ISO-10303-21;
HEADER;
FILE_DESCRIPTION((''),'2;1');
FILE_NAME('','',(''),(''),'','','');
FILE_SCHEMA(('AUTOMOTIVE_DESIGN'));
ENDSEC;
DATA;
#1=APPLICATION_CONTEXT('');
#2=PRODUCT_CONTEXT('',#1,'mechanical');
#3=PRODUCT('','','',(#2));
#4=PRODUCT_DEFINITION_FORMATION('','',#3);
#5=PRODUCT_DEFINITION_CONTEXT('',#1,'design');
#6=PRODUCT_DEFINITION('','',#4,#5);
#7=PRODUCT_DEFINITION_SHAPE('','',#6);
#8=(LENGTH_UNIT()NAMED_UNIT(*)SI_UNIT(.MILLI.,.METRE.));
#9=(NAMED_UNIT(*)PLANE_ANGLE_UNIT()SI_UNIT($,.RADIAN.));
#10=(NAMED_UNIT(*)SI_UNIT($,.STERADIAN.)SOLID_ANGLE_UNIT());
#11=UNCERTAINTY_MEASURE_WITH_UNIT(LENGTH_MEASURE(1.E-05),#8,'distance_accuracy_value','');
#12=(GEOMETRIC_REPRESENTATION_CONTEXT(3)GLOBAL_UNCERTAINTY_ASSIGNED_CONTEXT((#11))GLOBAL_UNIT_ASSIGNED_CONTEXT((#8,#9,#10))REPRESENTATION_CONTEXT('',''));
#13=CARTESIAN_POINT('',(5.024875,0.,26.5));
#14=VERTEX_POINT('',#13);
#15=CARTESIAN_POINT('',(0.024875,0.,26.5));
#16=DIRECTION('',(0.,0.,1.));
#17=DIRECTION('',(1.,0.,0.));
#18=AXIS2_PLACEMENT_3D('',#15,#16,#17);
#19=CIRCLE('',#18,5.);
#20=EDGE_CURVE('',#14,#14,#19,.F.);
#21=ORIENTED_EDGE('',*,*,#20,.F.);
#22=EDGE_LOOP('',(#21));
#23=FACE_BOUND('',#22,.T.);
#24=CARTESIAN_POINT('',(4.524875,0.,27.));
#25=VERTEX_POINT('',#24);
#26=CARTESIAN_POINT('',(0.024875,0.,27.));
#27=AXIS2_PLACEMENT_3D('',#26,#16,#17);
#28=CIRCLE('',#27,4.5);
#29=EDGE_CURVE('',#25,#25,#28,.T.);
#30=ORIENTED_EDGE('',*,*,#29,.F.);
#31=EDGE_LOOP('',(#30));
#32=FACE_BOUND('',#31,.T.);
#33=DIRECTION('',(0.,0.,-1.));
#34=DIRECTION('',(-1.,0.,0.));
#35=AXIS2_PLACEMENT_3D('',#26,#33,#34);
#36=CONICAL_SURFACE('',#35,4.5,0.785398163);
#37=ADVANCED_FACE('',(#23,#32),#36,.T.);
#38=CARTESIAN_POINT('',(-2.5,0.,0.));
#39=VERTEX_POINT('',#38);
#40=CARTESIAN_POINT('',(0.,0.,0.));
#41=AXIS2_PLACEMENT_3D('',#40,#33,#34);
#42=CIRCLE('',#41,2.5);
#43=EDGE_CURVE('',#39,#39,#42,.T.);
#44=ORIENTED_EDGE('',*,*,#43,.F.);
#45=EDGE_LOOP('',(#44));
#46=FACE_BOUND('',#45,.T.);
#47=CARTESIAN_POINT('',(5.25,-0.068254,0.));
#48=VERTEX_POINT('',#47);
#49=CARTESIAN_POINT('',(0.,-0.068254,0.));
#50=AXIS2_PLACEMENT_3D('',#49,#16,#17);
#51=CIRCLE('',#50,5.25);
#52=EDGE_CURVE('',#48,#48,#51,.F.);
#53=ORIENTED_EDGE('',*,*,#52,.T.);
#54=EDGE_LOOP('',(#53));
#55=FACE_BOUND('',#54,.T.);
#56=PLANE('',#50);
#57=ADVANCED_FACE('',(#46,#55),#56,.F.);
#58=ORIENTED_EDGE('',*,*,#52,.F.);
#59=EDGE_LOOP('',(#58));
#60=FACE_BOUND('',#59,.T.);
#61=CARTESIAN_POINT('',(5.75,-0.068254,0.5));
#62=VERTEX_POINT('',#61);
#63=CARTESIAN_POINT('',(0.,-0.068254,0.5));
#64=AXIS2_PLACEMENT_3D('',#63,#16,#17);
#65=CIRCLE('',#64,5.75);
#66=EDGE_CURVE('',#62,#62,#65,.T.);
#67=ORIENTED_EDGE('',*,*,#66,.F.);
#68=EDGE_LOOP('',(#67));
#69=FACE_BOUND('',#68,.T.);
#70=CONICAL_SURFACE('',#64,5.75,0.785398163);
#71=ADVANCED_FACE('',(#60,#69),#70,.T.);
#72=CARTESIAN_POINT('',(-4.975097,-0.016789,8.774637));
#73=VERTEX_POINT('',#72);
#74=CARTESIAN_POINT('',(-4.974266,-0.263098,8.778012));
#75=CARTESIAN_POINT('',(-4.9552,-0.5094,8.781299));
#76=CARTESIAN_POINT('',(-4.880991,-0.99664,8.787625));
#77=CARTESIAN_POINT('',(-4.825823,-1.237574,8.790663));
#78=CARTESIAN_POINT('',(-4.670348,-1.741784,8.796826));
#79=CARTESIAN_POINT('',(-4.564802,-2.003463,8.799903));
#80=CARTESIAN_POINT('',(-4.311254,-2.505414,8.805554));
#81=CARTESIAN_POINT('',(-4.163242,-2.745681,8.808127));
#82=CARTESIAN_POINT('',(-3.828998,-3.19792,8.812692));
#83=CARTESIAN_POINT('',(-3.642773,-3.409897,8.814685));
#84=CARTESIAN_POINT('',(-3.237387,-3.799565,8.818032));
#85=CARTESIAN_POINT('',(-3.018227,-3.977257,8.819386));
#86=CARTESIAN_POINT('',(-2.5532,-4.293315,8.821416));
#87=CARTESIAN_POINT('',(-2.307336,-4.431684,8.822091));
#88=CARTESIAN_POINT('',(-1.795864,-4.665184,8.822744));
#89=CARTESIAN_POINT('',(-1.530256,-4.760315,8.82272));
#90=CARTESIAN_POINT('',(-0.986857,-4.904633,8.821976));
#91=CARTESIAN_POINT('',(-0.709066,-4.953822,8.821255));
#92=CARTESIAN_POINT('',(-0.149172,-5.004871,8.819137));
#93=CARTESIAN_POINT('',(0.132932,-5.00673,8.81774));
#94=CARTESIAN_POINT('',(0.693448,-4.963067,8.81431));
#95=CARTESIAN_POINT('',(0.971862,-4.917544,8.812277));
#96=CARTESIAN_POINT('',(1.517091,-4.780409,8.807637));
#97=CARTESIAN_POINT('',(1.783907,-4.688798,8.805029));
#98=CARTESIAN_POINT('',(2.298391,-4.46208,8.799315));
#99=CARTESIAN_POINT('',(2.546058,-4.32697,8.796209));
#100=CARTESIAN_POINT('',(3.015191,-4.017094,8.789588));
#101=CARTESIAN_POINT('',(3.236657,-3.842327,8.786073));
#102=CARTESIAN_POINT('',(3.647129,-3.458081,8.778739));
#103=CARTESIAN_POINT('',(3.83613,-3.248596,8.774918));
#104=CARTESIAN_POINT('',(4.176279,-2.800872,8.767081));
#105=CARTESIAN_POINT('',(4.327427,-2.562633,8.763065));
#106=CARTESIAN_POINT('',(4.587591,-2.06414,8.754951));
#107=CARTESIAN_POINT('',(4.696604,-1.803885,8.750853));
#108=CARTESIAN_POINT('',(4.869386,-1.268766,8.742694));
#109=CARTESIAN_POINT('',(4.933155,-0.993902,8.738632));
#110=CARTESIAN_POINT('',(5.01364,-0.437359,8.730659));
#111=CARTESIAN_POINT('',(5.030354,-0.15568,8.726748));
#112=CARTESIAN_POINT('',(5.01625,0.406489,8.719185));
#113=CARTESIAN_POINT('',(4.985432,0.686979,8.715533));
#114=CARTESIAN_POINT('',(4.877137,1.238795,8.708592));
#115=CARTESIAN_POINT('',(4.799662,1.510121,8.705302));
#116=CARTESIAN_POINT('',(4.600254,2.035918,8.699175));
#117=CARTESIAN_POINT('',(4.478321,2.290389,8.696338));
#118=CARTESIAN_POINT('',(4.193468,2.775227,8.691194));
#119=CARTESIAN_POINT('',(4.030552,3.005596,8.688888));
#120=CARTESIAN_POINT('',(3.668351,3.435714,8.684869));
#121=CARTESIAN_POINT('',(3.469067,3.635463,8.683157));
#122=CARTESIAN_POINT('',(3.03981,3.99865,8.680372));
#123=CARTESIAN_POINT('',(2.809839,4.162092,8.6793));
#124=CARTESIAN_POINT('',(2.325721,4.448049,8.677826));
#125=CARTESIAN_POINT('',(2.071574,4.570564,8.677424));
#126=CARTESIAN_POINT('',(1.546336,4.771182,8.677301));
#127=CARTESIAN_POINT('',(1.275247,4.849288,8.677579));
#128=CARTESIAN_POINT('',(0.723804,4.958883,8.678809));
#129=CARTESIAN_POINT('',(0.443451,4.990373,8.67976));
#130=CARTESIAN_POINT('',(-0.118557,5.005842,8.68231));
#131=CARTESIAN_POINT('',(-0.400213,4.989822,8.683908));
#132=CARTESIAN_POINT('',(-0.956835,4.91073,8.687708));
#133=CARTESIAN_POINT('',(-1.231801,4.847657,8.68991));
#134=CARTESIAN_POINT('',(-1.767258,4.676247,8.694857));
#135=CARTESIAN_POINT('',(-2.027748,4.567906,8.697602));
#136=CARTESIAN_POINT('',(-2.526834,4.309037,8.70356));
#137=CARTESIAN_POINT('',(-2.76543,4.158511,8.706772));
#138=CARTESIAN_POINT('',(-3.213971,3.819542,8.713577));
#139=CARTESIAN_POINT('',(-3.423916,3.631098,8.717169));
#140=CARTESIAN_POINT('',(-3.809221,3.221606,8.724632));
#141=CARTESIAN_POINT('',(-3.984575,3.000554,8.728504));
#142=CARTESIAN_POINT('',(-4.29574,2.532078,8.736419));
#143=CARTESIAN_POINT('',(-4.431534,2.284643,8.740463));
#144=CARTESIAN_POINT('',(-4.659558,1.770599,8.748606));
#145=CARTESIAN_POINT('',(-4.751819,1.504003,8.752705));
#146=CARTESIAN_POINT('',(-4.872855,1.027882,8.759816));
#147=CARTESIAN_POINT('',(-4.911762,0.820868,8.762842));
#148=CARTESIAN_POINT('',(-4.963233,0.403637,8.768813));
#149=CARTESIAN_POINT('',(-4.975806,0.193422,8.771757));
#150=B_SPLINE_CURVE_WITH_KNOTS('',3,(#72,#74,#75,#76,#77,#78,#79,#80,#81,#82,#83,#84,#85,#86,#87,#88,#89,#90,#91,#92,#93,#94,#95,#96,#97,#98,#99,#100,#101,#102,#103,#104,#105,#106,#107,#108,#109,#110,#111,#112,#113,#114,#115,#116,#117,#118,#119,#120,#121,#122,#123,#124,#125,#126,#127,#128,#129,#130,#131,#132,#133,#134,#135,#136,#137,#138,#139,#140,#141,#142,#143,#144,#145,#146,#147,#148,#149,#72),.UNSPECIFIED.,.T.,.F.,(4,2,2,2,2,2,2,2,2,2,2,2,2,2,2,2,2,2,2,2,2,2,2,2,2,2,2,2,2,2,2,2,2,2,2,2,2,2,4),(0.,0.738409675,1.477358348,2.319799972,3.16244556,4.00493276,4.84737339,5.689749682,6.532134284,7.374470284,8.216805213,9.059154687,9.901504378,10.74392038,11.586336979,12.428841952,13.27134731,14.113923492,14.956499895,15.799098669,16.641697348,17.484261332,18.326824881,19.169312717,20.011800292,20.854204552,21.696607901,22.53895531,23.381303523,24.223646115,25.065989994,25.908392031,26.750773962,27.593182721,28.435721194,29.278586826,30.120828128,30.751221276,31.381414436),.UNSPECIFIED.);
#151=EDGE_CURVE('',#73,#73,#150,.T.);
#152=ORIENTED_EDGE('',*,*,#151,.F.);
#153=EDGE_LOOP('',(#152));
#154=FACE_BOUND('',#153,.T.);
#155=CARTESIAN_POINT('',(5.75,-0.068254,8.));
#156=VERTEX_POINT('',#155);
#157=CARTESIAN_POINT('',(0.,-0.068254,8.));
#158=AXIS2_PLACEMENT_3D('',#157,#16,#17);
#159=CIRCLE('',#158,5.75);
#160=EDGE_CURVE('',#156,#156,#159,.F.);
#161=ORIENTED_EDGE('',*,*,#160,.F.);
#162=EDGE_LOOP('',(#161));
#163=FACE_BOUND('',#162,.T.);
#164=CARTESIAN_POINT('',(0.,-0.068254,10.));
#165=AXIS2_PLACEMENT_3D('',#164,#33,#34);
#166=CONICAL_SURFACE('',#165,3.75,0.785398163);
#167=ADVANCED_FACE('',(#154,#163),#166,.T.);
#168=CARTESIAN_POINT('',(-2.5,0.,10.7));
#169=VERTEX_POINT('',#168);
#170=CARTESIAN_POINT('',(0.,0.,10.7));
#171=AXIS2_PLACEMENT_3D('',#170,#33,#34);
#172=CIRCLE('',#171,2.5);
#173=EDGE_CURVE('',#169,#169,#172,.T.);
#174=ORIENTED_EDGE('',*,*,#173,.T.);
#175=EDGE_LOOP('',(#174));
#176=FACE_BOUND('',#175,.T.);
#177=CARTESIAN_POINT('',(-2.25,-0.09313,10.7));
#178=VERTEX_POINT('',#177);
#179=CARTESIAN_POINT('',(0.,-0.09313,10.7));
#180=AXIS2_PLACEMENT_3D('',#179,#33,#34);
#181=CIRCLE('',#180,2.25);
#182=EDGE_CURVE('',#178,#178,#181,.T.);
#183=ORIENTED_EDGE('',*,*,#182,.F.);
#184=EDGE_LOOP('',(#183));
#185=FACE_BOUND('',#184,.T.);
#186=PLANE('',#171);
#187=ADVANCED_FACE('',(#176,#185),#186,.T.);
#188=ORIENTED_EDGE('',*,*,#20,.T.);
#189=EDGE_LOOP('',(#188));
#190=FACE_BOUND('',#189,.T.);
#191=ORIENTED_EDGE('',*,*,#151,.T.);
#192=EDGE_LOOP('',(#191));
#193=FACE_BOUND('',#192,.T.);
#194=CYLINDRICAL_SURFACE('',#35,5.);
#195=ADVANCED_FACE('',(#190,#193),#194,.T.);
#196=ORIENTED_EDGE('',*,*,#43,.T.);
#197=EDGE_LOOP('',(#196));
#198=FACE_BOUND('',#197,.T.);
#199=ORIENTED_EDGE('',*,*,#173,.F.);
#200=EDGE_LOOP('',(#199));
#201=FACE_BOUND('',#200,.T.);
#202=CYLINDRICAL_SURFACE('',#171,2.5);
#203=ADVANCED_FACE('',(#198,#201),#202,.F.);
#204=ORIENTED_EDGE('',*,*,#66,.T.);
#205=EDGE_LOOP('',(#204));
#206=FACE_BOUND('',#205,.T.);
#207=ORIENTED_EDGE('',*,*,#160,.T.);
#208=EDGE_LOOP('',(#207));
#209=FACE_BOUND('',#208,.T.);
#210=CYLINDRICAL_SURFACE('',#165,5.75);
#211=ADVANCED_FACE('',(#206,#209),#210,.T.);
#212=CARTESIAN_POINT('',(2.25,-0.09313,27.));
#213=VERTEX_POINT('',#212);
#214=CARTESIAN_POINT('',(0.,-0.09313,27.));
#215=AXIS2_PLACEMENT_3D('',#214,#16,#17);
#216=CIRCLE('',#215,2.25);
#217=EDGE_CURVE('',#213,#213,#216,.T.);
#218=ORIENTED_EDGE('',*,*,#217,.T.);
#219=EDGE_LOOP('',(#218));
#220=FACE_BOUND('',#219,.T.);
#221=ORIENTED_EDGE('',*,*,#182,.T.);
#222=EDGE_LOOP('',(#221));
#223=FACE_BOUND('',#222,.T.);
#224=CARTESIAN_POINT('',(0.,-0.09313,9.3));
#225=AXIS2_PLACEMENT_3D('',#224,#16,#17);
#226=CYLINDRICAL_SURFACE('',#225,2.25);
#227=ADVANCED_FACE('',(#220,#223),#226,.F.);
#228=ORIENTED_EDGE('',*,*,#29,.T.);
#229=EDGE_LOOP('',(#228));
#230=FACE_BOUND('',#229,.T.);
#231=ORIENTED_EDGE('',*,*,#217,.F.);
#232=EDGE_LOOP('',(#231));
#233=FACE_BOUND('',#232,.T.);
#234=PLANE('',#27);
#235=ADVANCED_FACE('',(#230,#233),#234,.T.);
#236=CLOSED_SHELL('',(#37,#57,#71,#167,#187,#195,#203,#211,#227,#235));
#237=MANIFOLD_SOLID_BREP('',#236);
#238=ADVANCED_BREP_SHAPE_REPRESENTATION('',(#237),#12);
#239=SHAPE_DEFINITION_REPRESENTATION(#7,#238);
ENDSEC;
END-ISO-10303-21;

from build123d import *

# Parameters (mm, degrees)
SKETCH2_R           = 5.75
BOSS_EXTRUDE2_DEPTH = 10
SKETCH3_R           = 5
BOSS_EXTRUDE3_DEPTH = 17
SKETCH4_R           = 2.5
CUT_EXTRUDE1_DEPTH  = 10.7
SKETCH5_R           = 2.25
CUT_EXTRUDE2_DEPTH  = 17.7
CHAMFER4_SIZE       = 2
CHAMFER5_SIZE       = 0.5
CHAMFER6_SIZE       = 0.5


with BuildPart() as part:
    # Sketch2 → Boss-Extrude2 (new body)
    with BuildSketch(Plane.XY):
        with Locations((0, -0.068254458)):
            Circle(SKETCH2_R)
    extrude(amount=BOSS_EXTRUDE2_DEPTH)

    # Sketch3 → Boss-Extrude3 (add)
    with BuildSketch(Plane.XY.offset(10)):
        with Locations((0.02487522, 0)):
            Circle(SKETCH3_R)
    extrude(amount=BOSS_EXTRUDE3_DEPTH)

    # Sketch4 → Cut-Extrude1 (cut)
    with BuildSketch(Plane(origin=(0, 0, 0), x_dir=(-1, 0, 0), z_dir=(0, 0, -1))):
        Circle(SKETCH4_R)
    extrude(amount=-CUT_EXTRUDE1_DEPTH, mode=Mode.SUBTRACT)

    # Sketch5 → Cut-Extrude2 (cut)
    with BuildSketch(Plane.XY.offset(27)):
        with Locations((0, -0.093129678)):
            Circle(SKETCH5_R)
    extrude(amount=-CUT_EXTRUDE2_DEPTH, mode=Mode.SUBTRACT)

    # Chamfer4
    # the kernel refuses this chamfer: 2 mm, written as the material it takes off along each edge
    with BuildSketch(Plane(origin=(0, -0.068254458, 10), x_dir=(1, 0, 0), z_dir=(0, -1, 0))) as chamfer4_piece_1_section:
        Polygon((5.75, -CHAMFER4_SIZE), (5.75 - CHAMFER4_SIZE, 0), (5.75, 0), align=None)
    chamfer4_piece_1 = revolve(axis=Axis((0, -0.068254458, 10), (0, 0, 1)), mode=Mode.PRIVATE)
    chamfer4_piece_1 = chamfer4_piece_1 - Plane(origin=(0.02487522, 0, 8.408355985), x_dir=(1, 0, 0), z_dir=(0, 0, -1)) * Cylinder(5, 23, mode=Mode.PRIVATE)
    add(chamfer4_piece_1, mode=Mode.SUBTRACT)

    # Chamfer5
    chamfer5_edges = [part.edges().sort_by_distance(p)[0] for p in [
        (-4.97512478, 0, 27),
    ]]
    chamfer(chamfer5_edges, length=CHAMFER5_SIZE)

    # Chamfer6
    chamfer6_edges = [part.edges().sort_by_distance(p)[0] for p in [
        (-5.75, -0.068254458, 0),
    ]]
    chamfer(chamfer6_edges, length=CHAMFER6_SIZE)


solid = part.part
